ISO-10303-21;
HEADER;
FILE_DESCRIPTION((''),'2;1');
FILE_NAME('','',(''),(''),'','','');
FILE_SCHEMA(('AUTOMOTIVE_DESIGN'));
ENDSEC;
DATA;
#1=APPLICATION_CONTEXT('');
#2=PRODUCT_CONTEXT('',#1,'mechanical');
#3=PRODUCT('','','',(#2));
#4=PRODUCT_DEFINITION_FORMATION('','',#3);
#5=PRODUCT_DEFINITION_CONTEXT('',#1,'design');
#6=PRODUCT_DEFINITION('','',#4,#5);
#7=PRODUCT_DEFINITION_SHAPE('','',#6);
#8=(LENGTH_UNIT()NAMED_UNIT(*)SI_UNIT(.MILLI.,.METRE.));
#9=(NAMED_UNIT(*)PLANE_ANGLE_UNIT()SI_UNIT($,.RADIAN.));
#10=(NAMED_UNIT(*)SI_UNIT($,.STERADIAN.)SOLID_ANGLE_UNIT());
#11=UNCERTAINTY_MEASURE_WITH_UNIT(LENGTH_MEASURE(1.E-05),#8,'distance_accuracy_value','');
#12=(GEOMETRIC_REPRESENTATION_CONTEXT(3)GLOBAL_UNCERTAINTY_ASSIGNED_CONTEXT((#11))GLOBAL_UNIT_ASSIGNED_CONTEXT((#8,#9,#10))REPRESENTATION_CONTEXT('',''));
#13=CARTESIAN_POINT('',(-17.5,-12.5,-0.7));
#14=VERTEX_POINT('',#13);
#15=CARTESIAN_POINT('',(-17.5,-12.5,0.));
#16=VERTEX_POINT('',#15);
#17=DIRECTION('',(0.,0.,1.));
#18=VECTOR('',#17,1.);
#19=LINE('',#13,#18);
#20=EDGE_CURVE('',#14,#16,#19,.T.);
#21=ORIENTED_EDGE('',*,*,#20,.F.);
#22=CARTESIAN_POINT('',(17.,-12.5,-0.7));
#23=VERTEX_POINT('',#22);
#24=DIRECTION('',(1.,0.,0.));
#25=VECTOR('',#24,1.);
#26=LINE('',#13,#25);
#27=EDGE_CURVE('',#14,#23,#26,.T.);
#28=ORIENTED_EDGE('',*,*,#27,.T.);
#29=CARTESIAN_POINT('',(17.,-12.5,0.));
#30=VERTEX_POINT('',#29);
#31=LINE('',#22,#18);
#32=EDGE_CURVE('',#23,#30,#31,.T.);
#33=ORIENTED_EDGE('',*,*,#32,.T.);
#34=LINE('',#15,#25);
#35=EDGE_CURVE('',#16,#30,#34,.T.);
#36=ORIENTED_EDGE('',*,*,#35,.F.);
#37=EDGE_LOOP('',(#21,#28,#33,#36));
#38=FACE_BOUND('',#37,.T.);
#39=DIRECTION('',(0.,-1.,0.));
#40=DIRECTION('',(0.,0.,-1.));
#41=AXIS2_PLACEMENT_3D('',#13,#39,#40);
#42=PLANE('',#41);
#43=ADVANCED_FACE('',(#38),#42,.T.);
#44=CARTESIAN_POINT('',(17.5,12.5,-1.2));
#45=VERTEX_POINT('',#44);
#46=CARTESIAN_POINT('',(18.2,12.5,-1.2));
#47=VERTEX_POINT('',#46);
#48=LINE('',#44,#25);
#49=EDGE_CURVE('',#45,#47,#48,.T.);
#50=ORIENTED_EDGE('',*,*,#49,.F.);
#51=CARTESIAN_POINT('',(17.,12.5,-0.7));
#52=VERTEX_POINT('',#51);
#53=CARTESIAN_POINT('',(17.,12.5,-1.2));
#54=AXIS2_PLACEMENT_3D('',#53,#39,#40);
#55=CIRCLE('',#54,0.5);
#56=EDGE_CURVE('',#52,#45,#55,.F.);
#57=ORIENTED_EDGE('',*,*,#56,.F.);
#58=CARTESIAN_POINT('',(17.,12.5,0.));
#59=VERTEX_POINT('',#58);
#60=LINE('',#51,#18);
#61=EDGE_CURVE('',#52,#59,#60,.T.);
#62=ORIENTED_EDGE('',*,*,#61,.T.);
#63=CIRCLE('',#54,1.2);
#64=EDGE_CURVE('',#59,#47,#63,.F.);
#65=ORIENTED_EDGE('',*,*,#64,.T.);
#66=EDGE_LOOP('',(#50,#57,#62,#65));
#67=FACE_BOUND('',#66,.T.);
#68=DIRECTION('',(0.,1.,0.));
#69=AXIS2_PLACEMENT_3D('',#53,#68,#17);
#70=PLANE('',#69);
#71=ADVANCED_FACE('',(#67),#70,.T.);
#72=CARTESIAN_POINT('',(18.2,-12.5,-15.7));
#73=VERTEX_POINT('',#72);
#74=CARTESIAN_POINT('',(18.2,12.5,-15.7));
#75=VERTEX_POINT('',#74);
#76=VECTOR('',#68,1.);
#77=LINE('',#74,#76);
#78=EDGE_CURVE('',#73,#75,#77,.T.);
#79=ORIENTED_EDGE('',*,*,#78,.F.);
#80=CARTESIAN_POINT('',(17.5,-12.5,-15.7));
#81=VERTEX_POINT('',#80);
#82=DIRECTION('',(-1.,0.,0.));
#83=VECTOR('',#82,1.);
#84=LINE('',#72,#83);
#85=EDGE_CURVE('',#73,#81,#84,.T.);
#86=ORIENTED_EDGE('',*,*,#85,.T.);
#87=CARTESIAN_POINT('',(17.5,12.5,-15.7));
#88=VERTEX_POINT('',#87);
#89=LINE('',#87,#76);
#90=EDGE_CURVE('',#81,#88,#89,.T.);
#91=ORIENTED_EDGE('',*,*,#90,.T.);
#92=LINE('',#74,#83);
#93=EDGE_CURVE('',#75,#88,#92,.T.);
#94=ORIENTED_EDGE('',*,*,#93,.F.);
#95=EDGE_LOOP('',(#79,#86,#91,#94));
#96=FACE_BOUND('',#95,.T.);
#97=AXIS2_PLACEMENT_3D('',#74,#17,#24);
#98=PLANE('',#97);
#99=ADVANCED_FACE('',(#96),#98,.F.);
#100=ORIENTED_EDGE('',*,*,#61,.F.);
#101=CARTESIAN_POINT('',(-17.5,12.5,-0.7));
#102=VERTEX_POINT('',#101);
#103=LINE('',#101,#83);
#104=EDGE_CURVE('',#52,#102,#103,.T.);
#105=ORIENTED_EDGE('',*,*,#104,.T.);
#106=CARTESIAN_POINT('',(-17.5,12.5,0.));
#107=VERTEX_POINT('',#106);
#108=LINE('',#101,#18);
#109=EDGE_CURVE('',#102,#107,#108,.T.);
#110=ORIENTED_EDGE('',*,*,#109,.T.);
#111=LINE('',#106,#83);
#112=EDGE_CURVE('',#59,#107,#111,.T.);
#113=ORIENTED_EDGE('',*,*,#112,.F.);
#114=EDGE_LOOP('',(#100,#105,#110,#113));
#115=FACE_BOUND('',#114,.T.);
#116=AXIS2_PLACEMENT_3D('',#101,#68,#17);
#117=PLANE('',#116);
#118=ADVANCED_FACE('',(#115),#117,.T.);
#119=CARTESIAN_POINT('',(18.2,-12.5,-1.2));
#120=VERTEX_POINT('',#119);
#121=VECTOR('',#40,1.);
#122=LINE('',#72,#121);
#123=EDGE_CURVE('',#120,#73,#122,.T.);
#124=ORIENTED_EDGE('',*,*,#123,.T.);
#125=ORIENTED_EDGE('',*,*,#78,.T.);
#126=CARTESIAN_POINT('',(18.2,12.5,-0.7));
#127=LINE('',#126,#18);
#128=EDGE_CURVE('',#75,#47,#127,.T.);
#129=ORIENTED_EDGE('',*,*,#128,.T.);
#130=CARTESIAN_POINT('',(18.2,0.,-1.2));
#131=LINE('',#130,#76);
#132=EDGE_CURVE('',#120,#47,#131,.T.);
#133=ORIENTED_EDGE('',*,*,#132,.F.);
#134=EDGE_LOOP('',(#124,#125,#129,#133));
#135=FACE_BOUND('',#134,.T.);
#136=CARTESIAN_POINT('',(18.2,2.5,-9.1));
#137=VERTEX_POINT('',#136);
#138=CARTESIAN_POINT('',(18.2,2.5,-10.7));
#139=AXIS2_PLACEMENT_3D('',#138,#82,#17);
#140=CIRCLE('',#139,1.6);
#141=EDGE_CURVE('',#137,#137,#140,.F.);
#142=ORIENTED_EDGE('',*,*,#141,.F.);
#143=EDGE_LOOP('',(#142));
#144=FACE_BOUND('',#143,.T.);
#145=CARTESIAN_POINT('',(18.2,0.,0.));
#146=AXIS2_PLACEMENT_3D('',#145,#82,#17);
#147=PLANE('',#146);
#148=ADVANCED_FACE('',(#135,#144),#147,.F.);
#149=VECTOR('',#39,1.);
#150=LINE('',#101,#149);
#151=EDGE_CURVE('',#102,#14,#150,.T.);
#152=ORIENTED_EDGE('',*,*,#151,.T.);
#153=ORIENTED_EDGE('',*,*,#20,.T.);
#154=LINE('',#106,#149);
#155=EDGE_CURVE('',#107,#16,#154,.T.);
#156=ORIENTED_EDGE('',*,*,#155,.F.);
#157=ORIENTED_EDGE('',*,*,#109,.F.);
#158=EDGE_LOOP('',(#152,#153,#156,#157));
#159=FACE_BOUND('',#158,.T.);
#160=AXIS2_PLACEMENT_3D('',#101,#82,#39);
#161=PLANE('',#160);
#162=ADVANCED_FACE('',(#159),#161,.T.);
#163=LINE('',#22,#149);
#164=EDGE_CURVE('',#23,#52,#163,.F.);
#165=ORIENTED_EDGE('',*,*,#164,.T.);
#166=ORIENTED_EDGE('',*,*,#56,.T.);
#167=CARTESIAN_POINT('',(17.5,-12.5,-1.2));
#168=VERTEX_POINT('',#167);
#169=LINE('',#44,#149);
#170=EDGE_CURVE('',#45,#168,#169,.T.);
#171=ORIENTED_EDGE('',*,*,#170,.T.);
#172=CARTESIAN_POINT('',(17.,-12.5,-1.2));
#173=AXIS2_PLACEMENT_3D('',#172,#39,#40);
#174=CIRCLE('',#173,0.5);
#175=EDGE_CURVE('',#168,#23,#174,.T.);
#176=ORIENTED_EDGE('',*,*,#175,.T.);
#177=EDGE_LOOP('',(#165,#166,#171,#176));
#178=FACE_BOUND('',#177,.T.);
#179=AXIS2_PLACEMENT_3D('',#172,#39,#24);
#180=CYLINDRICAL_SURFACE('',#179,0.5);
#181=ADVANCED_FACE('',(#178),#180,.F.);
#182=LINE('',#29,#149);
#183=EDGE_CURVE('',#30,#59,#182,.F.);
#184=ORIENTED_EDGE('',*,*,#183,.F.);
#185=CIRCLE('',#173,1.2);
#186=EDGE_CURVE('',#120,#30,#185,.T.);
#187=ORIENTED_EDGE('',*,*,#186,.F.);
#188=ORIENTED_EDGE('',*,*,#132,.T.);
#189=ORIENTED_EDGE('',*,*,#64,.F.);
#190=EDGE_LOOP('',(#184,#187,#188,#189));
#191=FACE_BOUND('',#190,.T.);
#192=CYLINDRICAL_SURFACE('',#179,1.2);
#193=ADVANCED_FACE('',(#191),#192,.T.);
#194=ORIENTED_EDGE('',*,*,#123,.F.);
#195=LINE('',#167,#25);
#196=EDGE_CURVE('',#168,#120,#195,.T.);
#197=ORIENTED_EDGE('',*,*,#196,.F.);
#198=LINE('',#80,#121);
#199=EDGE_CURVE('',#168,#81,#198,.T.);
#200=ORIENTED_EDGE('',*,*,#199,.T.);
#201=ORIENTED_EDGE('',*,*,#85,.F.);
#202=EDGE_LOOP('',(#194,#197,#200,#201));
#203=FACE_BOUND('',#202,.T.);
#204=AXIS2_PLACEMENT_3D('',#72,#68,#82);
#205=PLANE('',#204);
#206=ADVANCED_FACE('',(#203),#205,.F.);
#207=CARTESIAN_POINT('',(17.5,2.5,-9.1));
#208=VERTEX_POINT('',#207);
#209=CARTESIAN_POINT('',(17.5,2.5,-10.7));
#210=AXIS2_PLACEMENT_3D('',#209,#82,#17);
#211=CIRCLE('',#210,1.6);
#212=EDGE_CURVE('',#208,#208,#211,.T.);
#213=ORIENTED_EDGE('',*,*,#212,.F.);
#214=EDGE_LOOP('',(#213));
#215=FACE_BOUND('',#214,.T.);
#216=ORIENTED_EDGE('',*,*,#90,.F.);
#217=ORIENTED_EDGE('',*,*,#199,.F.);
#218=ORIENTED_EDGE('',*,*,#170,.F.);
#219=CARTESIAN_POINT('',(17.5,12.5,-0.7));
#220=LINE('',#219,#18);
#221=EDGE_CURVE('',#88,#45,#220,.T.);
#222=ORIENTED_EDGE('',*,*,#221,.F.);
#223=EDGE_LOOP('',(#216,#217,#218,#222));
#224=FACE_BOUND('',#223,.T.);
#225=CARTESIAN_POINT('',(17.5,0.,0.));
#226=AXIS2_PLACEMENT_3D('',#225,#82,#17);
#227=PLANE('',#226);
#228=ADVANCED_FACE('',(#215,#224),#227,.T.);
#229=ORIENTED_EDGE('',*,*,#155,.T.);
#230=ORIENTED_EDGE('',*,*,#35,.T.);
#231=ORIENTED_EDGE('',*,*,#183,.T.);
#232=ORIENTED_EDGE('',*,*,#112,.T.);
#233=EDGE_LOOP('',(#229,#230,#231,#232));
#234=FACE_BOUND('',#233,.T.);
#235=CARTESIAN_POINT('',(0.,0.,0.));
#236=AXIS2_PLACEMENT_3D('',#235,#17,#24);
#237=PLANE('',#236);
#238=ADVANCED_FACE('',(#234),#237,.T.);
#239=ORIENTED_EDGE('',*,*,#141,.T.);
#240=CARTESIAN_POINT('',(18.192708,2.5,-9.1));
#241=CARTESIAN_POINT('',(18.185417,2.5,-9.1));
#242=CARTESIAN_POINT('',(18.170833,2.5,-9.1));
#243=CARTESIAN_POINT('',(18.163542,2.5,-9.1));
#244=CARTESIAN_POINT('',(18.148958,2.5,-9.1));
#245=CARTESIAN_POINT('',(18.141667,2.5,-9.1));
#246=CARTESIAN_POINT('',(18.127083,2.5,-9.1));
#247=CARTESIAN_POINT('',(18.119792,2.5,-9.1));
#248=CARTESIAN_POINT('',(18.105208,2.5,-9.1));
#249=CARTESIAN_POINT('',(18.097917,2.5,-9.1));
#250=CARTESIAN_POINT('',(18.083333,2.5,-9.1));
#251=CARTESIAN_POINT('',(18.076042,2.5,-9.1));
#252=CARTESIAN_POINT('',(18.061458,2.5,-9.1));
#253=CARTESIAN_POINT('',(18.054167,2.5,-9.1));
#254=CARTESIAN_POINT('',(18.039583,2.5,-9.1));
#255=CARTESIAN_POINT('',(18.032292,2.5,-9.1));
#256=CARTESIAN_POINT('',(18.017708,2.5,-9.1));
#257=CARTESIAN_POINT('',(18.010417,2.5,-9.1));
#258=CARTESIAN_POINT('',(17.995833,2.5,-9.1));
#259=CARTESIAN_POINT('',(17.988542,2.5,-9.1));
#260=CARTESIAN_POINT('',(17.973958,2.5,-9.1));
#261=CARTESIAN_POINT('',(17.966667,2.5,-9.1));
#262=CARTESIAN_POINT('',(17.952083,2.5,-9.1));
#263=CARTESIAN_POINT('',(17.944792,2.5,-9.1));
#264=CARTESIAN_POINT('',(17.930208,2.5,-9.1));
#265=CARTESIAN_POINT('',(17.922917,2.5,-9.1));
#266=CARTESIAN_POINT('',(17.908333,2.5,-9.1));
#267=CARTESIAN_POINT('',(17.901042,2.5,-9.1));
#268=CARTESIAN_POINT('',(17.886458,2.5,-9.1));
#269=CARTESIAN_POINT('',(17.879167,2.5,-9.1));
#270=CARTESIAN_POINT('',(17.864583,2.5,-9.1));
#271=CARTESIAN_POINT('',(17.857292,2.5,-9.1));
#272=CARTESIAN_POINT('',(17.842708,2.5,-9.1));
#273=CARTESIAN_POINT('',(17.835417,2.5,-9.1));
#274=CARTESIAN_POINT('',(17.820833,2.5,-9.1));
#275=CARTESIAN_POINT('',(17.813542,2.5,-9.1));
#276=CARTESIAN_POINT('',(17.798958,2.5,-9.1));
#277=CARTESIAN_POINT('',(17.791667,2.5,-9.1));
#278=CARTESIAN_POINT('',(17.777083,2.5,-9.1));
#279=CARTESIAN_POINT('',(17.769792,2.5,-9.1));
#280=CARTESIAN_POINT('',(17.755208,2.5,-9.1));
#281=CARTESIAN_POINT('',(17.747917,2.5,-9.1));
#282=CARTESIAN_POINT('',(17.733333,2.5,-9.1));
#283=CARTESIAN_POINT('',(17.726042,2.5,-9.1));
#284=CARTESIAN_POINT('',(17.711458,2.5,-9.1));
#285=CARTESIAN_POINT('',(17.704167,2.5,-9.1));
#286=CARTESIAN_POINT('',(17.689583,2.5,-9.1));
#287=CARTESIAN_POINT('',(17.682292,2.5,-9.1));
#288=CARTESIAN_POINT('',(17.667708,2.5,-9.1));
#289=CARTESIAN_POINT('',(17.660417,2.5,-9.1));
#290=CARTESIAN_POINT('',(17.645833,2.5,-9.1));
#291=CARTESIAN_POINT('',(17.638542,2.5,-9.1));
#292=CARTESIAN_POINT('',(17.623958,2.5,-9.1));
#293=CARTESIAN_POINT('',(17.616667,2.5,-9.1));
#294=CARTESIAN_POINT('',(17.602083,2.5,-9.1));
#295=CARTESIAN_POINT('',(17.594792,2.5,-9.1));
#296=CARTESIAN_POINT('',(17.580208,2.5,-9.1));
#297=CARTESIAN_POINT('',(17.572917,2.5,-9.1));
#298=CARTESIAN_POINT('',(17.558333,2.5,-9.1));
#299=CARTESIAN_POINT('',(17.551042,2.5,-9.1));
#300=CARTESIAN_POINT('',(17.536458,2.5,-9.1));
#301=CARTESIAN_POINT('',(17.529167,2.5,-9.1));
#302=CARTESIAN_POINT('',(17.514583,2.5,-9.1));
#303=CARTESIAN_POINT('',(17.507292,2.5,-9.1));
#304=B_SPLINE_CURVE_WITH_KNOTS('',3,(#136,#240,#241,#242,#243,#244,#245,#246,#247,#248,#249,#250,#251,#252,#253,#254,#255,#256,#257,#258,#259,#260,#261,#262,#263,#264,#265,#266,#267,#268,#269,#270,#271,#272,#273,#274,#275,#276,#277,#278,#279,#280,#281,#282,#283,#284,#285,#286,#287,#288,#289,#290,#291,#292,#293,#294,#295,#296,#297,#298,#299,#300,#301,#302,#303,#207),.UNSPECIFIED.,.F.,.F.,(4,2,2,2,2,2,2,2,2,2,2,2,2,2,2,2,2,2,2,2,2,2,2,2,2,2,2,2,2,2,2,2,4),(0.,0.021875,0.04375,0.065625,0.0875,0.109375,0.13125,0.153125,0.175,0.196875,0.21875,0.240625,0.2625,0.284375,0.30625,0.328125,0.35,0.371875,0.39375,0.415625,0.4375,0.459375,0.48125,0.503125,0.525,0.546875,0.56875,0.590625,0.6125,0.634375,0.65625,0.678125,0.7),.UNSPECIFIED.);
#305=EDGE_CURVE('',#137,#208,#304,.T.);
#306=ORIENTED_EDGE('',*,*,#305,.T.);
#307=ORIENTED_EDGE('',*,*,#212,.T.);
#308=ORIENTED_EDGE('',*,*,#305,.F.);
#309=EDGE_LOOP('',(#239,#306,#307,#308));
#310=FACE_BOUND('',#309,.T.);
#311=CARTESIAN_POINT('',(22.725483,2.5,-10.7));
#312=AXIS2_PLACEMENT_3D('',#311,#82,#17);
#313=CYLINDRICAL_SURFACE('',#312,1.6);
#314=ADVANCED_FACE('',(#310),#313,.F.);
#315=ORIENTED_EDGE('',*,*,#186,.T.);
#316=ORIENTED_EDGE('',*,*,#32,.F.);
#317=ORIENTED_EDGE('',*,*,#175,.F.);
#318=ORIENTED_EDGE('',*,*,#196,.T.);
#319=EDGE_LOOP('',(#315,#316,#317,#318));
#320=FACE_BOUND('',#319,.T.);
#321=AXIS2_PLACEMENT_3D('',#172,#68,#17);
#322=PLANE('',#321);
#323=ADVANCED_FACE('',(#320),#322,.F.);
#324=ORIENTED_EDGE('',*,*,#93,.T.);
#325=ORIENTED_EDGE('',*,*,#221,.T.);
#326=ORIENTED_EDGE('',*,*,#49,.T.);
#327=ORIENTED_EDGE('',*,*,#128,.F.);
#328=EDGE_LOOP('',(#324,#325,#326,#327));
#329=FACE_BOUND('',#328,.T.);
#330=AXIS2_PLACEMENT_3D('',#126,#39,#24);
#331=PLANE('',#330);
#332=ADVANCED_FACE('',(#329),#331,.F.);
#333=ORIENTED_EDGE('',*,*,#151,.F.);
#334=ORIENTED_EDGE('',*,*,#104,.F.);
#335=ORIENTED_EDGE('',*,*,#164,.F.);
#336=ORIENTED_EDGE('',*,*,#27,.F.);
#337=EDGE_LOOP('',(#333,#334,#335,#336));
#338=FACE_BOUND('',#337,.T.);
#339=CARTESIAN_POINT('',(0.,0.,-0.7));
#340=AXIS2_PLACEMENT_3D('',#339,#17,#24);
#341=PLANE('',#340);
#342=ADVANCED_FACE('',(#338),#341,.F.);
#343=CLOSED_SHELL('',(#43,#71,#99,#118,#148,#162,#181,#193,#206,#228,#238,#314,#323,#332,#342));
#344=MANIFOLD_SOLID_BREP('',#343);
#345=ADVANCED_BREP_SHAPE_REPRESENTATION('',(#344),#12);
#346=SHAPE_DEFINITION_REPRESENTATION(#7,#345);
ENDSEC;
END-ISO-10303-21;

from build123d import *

# Parameters (mm, degrees)
SKETCH1_W                    = 35
SKETCH1_H                    = 25
BASE_FLANGE1_DEPTH           = 0.7
EDGE_FLANGE1_STRIP_W         = 3.8
EDGE_FLANGE1_STRIP_H         = 0.7
EDGE_FLANGE1_STRIP_CUT_DEPTH = 25
EDGE_FLANGE1_DEPTH           = 25
SKETCH10_R                   = 1.6
CUT_EXTRUDE1_DEPTH           = 0.7


# Sheet-metal steps are written as plain solids
with BuildPart() as part:
    # Sketch1 → Base-Flange1 (new body)
    with BuildSketch(Plane.XY):
        Rectangle(SKETCH1_W, SKETCH1_H)
    extrude(amount=-BASE_FLANGE1_DEPTH)

    # Edge-Flange1 strip (across the edge) → Edge-Flange1 strip cut (cut)
    with BuildSketch(Plane(origin=(17.5, 12.5, -0.7), x_dir=(-1, 0, 0), z_dir=(0, -1, 0))):
        with Locations((-1.4, -0.35)):
            Rectangle(EDGE_FLANGE1_STRIP_W, EDGE_FLANGE1_STRIP_H)
    extrude(amount=EDGE_FLANGE1_STRIP_CUT_DEPTH, mode=Mode.SUBTRACT)

    # Edge-Flange1 section (across the edge) → Edge-Flange1 (add)
    with BuildSketch(Plane(origin=(17.5, 12.5, -0.7), x_dir=(-1, 0, 0), z_dir=(0, -1, 0))):
        with BuildLine():
            Line((-0.7, 0.5), (-0.7, 15))
            Line((-0.7, 15), (0, 15))
            Line((0, 15), (0, 0.5))
            ThreePointArc((0, 0.5), (0.146446609, 0.146446609), (0.5, 0))
            Line((0.5, 0), (0.5, -0.7))
            ThreePointArc((0.5, -0.7), (-0.348528137, -0.348528137), (-0.7, 0.5))
        make_face()
    extrude(amount=EDGE_FLANGE1_DEPTH)

    # Sketch10 → Cut-Extrude1 (cut)
    with BuildSketch(Plane.ZY.offset(-17.5)):
        with Locations((-10.7, 2.5)):
            Circle(SKETCH10_R)
    extrude(amount=-CUT_EXTRUDE1_DEPTH, mode=Mode.SUBTRACT)


solid = part.part
